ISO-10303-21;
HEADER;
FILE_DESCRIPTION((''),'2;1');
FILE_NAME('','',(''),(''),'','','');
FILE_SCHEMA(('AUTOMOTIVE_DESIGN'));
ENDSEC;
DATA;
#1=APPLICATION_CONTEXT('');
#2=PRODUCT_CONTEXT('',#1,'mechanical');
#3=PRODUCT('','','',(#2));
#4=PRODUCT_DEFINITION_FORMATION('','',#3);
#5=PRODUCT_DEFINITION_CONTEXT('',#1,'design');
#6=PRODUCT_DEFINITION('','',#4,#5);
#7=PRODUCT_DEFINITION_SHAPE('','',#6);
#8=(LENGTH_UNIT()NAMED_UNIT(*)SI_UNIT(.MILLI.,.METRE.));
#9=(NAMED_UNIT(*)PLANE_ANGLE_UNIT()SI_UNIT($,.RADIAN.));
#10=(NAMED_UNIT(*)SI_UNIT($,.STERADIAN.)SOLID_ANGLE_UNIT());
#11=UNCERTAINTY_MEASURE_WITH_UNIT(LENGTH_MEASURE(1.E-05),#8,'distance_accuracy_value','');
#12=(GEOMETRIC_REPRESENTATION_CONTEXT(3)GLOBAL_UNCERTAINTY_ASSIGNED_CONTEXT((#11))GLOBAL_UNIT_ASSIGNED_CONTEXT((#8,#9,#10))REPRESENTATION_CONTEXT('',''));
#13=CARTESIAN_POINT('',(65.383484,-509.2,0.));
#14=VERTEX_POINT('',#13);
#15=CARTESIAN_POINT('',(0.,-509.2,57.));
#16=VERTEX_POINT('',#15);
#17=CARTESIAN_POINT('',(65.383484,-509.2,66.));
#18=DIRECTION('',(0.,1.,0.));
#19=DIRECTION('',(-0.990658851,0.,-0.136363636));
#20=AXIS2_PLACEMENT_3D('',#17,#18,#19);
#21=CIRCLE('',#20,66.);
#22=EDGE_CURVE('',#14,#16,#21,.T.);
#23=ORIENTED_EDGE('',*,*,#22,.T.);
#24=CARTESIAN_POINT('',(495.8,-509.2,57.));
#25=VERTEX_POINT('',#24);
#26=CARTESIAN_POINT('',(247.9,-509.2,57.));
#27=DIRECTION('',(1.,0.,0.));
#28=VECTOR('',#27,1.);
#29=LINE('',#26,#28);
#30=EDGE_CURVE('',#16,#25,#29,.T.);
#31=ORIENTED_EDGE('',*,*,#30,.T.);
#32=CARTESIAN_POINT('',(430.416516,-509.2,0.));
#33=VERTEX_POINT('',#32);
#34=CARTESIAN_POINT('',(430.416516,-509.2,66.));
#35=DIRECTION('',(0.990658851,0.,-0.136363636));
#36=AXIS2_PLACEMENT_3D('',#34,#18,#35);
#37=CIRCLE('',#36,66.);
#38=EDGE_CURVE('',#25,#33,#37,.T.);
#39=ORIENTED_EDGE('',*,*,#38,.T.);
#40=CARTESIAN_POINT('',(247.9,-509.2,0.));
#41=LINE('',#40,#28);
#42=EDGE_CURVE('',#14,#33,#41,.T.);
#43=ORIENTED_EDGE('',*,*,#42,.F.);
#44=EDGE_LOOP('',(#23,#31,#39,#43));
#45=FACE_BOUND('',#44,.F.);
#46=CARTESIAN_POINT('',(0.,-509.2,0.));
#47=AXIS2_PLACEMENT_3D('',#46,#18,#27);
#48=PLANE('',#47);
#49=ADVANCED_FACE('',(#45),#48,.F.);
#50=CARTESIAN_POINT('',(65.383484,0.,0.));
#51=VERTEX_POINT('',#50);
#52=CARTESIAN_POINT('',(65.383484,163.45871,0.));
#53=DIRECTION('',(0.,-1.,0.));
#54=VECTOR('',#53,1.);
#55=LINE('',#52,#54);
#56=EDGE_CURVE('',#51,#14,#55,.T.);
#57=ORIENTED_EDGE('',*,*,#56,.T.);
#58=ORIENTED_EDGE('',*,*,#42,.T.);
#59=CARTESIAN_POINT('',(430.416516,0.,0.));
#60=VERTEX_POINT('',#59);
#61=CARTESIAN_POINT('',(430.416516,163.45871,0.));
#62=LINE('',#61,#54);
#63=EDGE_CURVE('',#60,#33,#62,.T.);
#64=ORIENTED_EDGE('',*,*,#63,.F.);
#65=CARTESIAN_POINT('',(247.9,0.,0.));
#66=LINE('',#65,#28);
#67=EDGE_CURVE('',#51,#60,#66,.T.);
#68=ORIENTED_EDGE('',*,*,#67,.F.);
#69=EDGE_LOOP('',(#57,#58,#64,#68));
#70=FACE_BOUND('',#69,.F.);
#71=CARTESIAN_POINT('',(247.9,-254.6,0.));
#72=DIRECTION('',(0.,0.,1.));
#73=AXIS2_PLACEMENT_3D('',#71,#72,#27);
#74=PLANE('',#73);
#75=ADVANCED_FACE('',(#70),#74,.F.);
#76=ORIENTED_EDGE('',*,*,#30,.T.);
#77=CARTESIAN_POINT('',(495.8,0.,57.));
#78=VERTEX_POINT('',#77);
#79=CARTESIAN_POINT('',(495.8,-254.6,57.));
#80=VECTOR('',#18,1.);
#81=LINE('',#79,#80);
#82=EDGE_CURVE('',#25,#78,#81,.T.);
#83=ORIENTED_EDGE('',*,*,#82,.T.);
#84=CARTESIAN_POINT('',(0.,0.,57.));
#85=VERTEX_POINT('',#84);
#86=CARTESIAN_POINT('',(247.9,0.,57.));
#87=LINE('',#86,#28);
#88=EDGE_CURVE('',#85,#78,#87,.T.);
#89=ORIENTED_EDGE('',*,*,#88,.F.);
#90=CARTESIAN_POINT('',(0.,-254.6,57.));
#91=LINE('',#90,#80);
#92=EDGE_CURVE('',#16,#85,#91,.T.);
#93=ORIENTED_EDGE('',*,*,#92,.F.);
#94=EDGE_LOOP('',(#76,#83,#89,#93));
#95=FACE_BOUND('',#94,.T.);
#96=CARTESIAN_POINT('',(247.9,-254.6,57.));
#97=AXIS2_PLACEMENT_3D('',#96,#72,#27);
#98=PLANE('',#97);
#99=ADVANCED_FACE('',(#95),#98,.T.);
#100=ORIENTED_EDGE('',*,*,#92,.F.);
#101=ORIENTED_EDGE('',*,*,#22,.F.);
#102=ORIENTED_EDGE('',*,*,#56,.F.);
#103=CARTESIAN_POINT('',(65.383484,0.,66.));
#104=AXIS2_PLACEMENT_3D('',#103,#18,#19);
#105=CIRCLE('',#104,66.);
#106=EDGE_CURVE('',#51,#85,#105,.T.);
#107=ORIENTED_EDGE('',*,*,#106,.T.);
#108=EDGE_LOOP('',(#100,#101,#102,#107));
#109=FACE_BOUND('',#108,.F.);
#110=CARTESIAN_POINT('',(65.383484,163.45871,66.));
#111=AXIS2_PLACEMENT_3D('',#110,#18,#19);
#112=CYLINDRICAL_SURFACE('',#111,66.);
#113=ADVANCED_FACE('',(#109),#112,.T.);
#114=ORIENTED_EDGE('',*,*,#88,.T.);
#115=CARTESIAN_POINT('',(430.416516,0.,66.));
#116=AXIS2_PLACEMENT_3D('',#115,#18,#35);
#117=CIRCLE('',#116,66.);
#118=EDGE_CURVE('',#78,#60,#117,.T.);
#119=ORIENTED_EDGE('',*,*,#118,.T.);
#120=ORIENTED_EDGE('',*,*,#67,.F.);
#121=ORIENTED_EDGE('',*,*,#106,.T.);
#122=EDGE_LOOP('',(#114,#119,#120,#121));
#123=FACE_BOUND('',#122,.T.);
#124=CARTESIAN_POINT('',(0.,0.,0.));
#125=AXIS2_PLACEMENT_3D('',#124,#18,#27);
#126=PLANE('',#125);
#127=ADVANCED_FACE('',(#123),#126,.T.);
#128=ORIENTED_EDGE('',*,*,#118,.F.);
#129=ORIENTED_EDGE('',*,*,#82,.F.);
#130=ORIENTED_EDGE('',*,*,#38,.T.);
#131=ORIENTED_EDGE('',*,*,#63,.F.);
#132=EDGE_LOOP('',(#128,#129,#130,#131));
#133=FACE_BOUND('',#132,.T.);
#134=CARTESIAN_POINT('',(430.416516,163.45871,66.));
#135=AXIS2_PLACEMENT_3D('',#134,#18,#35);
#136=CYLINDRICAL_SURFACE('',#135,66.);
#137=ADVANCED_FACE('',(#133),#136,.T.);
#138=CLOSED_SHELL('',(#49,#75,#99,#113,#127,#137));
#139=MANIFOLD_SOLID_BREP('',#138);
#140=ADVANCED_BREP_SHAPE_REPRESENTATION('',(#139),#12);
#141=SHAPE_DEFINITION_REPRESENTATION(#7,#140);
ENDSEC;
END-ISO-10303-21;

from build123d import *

# Parameters (mm, degrees)
F0_W        = 495.8
F0_H        = 509.2
F1_DEPTH    = 57
F2_T1_DEPTH = 836.1174207656


# Not quite as in the source:
# - a fillet or chamfer that OpenCascade refuses, or shapes differently, is made with other operations: its cross-section is extruded or revolved along the edge and cut away or added


with BuildPart() as f1:
    # F0 (on Top) → F1 (new body)
    with BuildSketch(Plane.XY):
        with Locations((247.9, -254.6)):
            Rectangle(F0_W, F0_H)
    extrude(amount=F1_DEPTH)

    # F2: fillet of radius 66 on 2 edges, made by hand

    # F2_s2 → F2_t1 (cut)
    with BuildSketch(Plane.XZ.offset(-163.4587103828)):
        with BuildLine():
            ThreePointArc((0, 57), (22.0129872687, 16.2506281447), (65.3834841531, 0))
            Line((65.3834841531, 0), (0, 0))
            Line((0, 0), (0, 57))
        make_face()
        with BuildLine():
            ThreePointArc((495.8, 57), (473.7870127313, 16.2506281447), (430.4165158469, 0))
            Line((430.4165158469, 0), (495.8, 0))
            Line((495.8, 0), (495.8, 57))
        make_face()
    extrude(amount=F2_T1_DEPTH, mode=Mode.SUBTRACT)


solid = f1.part
